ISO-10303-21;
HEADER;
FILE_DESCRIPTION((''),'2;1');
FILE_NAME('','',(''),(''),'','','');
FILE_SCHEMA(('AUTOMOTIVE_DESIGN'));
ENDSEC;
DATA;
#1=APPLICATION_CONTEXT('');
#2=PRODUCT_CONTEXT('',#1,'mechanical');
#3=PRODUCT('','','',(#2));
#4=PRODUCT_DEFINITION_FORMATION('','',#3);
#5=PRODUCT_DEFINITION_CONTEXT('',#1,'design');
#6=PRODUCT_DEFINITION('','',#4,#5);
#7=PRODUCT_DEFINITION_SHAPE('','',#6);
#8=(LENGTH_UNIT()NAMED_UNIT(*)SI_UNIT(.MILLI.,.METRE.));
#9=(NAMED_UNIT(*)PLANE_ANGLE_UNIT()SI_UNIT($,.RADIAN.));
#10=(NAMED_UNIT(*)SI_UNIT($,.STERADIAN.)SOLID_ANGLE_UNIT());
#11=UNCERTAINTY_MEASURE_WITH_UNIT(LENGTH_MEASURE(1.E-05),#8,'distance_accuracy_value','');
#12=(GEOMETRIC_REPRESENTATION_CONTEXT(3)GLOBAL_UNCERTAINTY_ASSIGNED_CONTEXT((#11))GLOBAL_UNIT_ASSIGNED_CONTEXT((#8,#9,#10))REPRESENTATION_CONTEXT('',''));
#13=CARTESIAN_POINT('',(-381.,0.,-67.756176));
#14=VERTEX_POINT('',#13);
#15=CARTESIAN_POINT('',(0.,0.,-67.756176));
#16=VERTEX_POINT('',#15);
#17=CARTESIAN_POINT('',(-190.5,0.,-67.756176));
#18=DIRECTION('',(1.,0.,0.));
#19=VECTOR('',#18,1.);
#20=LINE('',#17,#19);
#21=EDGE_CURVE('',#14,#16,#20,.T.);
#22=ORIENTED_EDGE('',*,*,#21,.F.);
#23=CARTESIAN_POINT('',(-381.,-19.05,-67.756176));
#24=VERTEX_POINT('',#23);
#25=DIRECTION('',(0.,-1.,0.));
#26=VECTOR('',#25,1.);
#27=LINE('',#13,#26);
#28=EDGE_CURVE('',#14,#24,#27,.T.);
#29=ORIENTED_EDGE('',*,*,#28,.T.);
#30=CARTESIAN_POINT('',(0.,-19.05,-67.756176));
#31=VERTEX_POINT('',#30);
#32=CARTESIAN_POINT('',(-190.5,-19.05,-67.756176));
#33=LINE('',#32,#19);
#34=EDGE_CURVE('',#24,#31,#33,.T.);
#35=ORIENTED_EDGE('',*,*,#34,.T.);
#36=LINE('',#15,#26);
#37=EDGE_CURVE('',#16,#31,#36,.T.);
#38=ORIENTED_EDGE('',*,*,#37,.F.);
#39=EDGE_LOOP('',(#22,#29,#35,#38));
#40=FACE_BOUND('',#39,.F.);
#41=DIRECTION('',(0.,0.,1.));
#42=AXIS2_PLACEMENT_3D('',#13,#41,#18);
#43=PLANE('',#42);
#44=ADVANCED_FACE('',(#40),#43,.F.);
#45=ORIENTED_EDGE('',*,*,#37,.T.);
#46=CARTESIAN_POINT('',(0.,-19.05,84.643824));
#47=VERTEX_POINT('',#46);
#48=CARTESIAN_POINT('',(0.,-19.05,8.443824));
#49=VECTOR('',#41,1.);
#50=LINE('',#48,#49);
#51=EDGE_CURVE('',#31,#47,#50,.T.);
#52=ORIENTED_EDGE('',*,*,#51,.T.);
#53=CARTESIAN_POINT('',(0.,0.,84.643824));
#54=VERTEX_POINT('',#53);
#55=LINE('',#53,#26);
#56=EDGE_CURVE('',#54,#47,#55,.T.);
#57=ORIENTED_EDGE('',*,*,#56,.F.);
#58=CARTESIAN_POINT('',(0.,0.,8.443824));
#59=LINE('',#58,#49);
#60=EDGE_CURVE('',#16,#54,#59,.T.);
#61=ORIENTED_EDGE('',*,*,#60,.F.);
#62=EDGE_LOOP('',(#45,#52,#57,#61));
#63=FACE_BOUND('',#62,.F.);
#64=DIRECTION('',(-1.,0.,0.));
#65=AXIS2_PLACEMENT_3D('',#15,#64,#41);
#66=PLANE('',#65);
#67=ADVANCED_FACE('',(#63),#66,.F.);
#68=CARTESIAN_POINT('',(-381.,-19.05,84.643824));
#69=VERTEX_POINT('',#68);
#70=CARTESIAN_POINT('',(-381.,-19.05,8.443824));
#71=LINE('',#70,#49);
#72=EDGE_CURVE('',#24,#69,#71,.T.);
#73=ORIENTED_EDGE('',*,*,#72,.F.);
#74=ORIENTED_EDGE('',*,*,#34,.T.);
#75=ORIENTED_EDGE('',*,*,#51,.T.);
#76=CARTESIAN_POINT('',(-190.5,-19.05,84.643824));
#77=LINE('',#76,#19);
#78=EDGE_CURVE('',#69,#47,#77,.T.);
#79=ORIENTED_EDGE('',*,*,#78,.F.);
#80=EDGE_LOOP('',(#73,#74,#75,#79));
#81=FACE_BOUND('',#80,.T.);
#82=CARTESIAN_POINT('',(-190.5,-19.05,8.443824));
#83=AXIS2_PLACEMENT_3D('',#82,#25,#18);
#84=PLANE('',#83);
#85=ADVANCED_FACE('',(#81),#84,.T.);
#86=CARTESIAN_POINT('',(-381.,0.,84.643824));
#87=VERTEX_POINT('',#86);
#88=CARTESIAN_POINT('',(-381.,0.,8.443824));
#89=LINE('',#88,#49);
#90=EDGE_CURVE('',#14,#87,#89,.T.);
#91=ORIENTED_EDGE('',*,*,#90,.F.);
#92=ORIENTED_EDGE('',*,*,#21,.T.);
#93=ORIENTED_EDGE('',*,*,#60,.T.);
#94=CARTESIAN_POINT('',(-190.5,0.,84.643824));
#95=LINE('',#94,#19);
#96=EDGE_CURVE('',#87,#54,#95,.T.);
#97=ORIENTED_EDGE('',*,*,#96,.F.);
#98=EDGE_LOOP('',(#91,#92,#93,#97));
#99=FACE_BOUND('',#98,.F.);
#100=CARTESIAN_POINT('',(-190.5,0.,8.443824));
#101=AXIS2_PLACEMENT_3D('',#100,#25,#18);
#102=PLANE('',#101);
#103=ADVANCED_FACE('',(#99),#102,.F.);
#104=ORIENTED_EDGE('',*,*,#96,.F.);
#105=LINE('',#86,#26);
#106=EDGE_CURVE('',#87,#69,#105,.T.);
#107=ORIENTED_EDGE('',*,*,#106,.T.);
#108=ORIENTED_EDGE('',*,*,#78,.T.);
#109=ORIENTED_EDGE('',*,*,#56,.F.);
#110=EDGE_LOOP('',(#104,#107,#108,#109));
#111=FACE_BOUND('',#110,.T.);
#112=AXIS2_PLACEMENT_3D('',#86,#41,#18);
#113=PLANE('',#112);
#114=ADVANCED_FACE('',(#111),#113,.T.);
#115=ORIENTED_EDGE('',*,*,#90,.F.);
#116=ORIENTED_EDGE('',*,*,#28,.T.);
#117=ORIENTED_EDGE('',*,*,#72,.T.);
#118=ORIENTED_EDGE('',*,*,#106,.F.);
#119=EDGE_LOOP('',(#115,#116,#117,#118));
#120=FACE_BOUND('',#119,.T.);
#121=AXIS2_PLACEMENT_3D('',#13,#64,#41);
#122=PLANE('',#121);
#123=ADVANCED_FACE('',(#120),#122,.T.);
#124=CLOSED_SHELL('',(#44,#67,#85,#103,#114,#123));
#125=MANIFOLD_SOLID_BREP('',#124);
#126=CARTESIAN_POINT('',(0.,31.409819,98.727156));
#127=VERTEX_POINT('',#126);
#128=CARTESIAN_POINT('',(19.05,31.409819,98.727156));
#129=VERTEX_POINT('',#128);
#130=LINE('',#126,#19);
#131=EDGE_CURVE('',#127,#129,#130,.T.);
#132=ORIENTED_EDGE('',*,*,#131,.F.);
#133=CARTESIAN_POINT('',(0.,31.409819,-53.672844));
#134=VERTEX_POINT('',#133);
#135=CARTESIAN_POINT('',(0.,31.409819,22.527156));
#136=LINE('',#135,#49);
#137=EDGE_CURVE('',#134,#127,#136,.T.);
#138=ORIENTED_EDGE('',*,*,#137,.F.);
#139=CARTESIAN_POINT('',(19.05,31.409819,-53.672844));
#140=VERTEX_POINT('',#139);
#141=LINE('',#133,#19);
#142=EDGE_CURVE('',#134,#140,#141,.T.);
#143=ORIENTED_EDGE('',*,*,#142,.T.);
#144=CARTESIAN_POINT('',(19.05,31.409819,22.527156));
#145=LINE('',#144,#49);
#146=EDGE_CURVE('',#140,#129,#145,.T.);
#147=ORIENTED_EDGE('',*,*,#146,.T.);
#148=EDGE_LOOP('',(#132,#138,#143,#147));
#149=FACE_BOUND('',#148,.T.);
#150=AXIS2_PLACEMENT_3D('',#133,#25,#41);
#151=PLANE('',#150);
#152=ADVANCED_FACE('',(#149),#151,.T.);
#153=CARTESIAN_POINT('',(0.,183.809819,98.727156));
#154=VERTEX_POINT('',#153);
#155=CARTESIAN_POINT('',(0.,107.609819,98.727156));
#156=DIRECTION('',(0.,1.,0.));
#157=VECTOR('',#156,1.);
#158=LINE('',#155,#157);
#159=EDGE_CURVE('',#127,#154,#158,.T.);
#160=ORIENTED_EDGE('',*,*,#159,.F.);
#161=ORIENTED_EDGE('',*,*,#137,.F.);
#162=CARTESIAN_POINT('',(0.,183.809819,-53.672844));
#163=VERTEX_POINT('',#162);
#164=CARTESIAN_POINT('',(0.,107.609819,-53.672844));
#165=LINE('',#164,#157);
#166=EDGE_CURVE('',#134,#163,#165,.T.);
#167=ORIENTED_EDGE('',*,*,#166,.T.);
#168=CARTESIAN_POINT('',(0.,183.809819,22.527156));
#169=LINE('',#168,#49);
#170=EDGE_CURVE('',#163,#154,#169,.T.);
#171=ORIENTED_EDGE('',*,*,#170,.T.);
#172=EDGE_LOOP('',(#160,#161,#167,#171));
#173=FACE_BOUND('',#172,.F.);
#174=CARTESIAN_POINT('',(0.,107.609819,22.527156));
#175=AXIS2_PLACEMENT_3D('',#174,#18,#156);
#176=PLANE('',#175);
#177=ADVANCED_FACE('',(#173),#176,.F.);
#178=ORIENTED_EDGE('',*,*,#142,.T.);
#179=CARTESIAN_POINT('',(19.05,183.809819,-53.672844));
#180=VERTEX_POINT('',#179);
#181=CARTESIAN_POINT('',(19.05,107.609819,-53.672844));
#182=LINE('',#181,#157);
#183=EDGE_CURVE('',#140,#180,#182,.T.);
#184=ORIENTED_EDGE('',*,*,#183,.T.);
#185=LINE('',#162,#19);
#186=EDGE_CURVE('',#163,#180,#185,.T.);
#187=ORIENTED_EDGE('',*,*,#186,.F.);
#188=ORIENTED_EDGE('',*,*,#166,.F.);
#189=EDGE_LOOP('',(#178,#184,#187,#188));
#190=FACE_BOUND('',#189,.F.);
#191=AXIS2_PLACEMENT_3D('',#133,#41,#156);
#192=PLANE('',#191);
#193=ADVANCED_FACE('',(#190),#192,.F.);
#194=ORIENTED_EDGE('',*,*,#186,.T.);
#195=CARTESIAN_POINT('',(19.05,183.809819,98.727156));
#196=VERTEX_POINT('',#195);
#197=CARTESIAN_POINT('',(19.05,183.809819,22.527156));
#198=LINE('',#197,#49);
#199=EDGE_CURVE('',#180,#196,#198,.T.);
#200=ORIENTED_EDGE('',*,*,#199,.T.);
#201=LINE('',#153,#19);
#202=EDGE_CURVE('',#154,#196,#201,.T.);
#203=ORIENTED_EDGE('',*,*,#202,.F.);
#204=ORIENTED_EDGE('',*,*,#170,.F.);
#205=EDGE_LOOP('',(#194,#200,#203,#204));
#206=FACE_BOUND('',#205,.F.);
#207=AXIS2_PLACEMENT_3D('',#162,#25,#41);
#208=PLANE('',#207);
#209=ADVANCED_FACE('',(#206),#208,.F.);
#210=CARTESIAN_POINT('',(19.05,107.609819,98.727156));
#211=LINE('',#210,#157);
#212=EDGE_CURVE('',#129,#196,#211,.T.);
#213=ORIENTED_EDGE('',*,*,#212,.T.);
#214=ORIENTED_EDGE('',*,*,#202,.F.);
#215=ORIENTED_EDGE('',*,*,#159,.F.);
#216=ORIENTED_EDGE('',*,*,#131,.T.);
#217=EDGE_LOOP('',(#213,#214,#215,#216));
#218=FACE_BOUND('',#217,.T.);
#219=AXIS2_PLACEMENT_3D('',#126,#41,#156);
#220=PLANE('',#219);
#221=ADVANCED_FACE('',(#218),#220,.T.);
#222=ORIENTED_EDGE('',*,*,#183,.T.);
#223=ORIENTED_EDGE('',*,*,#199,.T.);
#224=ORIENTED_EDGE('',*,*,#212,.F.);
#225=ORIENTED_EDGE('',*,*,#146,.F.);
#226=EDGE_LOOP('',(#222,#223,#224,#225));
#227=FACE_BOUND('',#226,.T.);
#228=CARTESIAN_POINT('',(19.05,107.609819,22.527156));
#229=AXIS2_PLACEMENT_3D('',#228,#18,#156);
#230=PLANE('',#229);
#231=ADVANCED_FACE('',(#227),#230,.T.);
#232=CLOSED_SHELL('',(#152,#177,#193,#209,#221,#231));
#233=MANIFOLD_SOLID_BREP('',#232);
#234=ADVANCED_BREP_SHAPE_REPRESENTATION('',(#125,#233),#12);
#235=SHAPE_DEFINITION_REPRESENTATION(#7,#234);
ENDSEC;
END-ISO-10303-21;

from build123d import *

# Parameters (mm, degrees)
F1_W     = 152.4
F1_H     = 152.4
F2_DEPTH = 19.05
F0_W     = 381
F0_H     = 152.4
F3_DEPTH = 19.05


# Not quite as in the source:
# - a length typed as a fraction of an inch, garbled in the dataset ("3 / 203.2 mm" for 3/8 in), is restored


with BuildPart() as f2:
    # F1 (on Right) → F2 (new body)
    with BuildSketch(Plane.YZ):
        with Locations((107.6098186895, 22.5271563627)):
            Rectangle(F1_W, F1_H)
    extrude(amount=F2_DEPTH)


with BuildPart() as f3:
    # F0 (on Front) → F3 (new body)
    with BuildSketch(Plane.XZ):
        with Locations((-190.5, 8.4438240051)):
            Rectangle(F0_W, F0_H)
    extrude(amount=F3_DEPTH)


solid = Compound([f2.part, f3.part])
